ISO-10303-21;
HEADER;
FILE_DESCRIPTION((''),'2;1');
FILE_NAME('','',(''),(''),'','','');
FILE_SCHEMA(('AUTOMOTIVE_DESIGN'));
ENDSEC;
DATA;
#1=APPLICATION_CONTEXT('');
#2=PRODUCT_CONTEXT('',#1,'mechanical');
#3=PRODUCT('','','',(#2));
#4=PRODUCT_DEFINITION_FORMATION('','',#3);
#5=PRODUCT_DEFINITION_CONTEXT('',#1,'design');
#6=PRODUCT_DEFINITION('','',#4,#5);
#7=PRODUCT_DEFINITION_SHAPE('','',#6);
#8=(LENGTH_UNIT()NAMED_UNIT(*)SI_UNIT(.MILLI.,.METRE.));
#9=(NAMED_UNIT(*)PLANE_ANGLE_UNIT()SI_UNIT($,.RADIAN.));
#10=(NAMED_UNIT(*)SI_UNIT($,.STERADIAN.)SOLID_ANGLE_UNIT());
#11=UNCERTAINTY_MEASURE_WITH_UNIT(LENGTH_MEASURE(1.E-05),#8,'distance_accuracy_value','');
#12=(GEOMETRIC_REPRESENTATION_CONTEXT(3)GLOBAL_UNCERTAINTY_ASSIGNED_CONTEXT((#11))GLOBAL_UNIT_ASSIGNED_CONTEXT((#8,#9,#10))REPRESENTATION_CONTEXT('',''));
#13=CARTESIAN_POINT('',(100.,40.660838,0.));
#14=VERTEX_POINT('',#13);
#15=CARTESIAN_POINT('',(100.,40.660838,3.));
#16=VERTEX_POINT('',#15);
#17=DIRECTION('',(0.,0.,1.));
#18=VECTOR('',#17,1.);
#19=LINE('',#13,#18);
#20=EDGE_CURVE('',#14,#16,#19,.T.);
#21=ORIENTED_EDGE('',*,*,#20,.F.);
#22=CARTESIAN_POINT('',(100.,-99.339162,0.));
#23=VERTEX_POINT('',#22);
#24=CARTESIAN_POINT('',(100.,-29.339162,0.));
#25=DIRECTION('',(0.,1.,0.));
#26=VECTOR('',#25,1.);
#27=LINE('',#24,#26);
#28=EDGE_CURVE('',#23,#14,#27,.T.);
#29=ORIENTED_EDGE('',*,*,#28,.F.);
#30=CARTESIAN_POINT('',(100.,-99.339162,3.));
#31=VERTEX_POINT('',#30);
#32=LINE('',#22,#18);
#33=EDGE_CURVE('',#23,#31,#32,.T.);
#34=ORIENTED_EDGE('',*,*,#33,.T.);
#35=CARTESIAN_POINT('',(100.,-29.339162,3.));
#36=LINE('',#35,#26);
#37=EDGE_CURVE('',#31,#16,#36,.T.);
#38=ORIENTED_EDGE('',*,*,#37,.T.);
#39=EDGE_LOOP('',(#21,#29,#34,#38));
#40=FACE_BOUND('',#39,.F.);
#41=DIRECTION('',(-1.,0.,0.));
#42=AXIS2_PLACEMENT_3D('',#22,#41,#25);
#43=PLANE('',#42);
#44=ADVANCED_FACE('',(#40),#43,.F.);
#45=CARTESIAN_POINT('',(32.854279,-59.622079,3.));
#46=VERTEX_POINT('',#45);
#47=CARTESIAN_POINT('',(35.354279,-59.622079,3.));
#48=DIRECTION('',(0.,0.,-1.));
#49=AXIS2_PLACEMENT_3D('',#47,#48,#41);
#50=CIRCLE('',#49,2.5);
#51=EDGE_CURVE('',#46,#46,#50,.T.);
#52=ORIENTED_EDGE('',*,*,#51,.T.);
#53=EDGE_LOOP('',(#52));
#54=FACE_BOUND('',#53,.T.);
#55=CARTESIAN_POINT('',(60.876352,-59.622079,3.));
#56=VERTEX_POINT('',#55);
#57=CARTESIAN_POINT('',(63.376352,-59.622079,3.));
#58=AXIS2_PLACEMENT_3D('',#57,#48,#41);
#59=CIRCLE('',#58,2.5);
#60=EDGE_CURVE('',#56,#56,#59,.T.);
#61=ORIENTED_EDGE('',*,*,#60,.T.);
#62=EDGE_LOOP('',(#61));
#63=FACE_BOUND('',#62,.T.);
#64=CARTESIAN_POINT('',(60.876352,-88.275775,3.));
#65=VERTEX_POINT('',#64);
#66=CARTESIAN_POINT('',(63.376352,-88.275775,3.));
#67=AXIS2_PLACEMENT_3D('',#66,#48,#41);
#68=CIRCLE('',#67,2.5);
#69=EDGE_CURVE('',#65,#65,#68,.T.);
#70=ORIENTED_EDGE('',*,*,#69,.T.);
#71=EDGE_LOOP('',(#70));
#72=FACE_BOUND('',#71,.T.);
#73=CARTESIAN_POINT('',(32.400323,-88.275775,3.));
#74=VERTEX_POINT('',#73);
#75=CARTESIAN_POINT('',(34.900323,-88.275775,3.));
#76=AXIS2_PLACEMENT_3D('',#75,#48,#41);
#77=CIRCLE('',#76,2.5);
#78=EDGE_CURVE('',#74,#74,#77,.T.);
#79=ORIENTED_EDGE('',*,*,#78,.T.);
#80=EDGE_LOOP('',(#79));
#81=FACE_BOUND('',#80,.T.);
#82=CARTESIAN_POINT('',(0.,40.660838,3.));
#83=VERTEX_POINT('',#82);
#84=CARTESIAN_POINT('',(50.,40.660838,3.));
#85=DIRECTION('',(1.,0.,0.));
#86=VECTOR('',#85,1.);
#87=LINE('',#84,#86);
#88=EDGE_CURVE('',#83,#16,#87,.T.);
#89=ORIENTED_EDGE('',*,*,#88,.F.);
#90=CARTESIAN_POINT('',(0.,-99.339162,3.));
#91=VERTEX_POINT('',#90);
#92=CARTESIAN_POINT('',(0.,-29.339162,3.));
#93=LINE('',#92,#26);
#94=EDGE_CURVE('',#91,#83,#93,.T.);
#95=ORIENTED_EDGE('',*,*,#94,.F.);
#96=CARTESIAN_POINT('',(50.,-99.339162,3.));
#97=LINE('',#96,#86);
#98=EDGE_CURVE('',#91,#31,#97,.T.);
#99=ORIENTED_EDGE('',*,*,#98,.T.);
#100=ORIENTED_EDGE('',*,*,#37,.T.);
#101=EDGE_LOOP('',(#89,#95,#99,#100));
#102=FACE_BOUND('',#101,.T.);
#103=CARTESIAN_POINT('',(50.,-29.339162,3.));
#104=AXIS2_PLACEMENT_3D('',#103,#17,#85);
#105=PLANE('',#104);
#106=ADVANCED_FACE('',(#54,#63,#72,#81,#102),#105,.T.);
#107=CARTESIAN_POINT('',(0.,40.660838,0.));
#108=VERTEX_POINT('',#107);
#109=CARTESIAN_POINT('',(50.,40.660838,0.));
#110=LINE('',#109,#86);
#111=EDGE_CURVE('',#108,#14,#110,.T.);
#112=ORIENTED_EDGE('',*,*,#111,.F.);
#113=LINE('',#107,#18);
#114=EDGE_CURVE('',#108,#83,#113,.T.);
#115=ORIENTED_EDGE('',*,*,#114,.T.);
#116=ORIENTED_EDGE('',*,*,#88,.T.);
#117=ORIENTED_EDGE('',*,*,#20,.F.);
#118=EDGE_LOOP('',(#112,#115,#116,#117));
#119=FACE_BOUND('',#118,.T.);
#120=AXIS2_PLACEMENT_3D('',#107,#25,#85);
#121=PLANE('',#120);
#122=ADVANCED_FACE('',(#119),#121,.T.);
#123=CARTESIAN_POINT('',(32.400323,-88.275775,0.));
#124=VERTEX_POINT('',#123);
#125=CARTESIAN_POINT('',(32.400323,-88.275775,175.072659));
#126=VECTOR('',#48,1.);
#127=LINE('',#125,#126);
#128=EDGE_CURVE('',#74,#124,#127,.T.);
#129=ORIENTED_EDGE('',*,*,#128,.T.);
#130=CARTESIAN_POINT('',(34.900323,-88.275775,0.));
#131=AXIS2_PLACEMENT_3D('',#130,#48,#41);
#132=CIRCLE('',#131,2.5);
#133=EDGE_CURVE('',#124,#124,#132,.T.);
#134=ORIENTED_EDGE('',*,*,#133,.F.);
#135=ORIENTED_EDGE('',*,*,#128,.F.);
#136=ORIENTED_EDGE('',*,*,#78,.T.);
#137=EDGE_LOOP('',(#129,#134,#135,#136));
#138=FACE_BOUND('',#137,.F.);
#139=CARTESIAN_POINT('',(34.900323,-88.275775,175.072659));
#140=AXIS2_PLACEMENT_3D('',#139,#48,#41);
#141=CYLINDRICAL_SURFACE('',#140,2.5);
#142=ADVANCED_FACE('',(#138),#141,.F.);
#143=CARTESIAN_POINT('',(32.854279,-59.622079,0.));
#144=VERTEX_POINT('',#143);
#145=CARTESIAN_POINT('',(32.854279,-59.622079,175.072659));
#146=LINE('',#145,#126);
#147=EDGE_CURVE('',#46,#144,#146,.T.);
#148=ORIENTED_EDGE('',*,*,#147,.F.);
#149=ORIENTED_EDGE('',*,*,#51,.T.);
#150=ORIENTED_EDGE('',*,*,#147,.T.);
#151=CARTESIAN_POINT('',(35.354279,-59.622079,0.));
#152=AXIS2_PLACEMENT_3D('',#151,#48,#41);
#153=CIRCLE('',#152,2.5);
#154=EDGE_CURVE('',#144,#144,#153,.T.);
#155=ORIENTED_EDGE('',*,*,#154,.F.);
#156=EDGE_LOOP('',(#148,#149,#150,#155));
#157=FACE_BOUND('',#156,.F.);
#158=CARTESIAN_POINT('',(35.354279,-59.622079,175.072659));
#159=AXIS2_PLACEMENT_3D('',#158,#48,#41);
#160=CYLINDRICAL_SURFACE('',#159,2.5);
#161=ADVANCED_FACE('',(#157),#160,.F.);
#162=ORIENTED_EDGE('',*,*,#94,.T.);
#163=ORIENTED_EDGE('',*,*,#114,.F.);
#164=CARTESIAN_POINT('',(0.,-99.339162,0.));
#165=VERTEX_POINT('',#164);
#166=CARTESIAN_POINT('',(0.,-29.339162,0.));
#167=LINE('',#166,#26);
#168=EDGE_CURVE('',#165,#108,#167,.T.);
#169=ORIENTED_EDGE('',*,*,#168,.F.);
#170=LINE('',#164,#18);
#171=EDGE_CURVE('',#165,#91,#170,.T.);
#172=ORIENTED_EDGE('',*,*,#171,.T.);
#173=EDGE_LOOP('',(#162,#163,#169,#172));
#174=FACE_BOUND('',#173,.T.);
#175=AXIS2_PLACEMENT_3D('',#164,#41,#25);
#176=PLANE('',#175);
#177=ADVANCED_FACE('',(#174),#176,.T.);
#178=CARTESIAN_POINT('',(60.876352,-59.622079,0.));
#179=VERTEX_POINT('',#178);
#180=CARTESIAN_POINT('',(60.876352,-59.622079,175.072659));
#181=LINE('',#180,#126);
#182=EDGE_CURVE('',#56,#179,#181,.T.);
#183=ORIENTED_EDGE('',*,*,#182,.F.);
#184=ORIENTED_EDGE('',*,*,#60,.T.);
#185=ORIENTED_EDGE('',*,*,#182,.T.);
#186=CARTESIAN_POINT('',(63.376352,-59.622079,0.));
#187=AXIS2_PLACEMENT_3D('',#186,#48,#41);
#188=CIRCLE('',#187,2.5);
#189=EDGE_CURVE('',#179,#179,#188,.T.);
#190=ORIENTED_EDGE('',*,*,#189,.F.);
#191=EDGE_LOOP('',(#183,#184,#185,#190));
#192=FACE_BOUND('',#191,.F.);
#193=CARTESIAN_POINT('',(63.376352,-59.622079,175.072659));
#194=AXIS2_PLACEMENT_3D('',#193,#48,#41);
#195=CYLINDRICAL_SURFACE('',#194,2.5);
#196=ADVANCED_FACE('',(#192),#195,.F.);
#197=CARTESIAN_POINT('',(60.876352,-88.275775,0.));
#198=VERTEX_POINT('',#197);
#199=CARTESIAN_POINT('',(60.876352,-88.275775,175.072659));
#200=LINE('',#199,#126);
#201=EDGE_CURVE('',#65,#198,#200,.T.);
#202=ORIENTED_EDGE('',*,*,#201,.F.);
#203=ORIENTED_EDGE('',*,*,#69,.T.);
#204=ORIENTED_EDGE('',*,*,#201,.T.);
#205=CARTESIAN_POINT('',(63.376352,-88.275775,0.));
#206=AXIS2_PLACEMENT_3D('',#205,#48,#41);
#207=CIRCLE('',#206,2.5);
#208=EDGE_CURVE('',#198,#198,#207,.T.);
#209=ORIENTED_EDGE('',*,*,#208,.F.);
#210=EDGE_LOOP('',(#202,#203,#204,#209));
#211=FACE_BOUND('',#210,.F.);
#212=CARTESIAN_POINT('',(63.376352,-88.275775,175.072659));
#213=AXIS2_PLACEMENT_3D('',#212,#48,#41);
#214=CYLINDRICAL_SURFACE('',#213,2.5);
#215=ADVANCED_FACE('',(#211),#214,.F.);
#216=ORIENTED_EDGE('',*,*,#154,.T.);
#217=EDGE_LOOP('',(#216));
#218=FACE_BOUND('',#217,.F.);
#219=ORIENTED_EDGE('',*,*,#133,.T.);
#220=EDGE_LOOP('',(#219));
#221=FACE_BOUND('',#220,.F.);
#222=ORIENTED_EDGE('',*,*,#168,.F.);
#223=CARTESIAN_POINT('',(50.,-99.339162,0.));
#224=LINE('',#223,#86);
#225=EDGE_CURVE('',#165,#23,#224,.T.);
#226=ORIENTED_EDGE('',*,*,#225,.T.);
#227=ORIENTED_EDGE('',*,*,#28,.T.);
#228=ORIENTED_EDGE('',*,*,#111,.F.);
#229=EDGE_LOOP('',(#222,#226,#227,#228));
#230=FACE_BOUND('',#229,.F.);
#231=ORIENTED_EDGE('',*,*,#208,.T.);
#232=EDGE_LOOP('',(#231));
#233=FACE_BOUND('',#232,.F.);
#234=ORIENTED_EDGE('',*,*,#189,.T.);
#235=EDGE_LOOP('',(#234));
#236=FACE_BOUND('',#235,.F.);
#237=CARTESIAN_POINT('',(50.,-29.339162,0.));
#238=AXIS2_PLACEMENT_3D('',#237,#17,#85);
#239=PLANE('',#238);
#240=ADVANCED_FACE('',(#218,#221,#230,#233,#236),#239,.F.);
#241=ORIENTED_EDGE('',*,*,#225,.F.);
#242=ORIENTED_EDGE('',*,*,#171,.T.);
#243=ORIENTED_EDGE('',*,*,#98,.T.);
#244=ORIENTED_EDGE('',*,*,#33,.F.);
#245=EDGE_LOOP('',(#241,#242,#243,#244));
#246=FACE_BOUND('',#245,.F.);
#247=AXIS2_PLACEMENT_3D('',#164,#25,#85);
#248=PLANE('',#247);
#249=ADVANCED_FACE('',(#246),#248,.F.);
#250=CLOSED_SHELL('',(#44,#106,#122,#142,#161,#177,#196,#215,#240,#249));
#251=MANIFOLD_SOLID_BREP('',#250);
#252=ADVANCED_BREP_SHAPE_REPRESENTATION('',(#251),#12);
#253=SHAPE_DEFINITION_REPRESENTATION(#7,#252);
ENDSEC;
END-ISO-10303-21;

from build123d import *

# Parameters (mm, degrees)
F1_W     = 100
F1_H     = 140
F2_DEPTH = 3
F7_D     = 5


# Not quite as in the source:
# - the program builds the solid bodies; features that only make, move or delete a surface that nothing else refers to are left out


with BuildPart() as f2:
    # F1 (on face) → F2 (new body)
    with BuildSketch(Plane.XY):
        with Locations((50, -29.3391620165)):
            Rectangle(F1_W, F1_H)
    extrude(amount=F2_DEPTH)

    # F7 (through all)
    with Locations(Plane.XY.offset(3)):
        with Locations((35.3542789817, -59.622079134), (34.9003225565, -88.2757753134), (63.376352191, -59.622079134), (63.376352191, -88.2757753134)):
            Hole(F7_D / 2)


solid = f2.part
